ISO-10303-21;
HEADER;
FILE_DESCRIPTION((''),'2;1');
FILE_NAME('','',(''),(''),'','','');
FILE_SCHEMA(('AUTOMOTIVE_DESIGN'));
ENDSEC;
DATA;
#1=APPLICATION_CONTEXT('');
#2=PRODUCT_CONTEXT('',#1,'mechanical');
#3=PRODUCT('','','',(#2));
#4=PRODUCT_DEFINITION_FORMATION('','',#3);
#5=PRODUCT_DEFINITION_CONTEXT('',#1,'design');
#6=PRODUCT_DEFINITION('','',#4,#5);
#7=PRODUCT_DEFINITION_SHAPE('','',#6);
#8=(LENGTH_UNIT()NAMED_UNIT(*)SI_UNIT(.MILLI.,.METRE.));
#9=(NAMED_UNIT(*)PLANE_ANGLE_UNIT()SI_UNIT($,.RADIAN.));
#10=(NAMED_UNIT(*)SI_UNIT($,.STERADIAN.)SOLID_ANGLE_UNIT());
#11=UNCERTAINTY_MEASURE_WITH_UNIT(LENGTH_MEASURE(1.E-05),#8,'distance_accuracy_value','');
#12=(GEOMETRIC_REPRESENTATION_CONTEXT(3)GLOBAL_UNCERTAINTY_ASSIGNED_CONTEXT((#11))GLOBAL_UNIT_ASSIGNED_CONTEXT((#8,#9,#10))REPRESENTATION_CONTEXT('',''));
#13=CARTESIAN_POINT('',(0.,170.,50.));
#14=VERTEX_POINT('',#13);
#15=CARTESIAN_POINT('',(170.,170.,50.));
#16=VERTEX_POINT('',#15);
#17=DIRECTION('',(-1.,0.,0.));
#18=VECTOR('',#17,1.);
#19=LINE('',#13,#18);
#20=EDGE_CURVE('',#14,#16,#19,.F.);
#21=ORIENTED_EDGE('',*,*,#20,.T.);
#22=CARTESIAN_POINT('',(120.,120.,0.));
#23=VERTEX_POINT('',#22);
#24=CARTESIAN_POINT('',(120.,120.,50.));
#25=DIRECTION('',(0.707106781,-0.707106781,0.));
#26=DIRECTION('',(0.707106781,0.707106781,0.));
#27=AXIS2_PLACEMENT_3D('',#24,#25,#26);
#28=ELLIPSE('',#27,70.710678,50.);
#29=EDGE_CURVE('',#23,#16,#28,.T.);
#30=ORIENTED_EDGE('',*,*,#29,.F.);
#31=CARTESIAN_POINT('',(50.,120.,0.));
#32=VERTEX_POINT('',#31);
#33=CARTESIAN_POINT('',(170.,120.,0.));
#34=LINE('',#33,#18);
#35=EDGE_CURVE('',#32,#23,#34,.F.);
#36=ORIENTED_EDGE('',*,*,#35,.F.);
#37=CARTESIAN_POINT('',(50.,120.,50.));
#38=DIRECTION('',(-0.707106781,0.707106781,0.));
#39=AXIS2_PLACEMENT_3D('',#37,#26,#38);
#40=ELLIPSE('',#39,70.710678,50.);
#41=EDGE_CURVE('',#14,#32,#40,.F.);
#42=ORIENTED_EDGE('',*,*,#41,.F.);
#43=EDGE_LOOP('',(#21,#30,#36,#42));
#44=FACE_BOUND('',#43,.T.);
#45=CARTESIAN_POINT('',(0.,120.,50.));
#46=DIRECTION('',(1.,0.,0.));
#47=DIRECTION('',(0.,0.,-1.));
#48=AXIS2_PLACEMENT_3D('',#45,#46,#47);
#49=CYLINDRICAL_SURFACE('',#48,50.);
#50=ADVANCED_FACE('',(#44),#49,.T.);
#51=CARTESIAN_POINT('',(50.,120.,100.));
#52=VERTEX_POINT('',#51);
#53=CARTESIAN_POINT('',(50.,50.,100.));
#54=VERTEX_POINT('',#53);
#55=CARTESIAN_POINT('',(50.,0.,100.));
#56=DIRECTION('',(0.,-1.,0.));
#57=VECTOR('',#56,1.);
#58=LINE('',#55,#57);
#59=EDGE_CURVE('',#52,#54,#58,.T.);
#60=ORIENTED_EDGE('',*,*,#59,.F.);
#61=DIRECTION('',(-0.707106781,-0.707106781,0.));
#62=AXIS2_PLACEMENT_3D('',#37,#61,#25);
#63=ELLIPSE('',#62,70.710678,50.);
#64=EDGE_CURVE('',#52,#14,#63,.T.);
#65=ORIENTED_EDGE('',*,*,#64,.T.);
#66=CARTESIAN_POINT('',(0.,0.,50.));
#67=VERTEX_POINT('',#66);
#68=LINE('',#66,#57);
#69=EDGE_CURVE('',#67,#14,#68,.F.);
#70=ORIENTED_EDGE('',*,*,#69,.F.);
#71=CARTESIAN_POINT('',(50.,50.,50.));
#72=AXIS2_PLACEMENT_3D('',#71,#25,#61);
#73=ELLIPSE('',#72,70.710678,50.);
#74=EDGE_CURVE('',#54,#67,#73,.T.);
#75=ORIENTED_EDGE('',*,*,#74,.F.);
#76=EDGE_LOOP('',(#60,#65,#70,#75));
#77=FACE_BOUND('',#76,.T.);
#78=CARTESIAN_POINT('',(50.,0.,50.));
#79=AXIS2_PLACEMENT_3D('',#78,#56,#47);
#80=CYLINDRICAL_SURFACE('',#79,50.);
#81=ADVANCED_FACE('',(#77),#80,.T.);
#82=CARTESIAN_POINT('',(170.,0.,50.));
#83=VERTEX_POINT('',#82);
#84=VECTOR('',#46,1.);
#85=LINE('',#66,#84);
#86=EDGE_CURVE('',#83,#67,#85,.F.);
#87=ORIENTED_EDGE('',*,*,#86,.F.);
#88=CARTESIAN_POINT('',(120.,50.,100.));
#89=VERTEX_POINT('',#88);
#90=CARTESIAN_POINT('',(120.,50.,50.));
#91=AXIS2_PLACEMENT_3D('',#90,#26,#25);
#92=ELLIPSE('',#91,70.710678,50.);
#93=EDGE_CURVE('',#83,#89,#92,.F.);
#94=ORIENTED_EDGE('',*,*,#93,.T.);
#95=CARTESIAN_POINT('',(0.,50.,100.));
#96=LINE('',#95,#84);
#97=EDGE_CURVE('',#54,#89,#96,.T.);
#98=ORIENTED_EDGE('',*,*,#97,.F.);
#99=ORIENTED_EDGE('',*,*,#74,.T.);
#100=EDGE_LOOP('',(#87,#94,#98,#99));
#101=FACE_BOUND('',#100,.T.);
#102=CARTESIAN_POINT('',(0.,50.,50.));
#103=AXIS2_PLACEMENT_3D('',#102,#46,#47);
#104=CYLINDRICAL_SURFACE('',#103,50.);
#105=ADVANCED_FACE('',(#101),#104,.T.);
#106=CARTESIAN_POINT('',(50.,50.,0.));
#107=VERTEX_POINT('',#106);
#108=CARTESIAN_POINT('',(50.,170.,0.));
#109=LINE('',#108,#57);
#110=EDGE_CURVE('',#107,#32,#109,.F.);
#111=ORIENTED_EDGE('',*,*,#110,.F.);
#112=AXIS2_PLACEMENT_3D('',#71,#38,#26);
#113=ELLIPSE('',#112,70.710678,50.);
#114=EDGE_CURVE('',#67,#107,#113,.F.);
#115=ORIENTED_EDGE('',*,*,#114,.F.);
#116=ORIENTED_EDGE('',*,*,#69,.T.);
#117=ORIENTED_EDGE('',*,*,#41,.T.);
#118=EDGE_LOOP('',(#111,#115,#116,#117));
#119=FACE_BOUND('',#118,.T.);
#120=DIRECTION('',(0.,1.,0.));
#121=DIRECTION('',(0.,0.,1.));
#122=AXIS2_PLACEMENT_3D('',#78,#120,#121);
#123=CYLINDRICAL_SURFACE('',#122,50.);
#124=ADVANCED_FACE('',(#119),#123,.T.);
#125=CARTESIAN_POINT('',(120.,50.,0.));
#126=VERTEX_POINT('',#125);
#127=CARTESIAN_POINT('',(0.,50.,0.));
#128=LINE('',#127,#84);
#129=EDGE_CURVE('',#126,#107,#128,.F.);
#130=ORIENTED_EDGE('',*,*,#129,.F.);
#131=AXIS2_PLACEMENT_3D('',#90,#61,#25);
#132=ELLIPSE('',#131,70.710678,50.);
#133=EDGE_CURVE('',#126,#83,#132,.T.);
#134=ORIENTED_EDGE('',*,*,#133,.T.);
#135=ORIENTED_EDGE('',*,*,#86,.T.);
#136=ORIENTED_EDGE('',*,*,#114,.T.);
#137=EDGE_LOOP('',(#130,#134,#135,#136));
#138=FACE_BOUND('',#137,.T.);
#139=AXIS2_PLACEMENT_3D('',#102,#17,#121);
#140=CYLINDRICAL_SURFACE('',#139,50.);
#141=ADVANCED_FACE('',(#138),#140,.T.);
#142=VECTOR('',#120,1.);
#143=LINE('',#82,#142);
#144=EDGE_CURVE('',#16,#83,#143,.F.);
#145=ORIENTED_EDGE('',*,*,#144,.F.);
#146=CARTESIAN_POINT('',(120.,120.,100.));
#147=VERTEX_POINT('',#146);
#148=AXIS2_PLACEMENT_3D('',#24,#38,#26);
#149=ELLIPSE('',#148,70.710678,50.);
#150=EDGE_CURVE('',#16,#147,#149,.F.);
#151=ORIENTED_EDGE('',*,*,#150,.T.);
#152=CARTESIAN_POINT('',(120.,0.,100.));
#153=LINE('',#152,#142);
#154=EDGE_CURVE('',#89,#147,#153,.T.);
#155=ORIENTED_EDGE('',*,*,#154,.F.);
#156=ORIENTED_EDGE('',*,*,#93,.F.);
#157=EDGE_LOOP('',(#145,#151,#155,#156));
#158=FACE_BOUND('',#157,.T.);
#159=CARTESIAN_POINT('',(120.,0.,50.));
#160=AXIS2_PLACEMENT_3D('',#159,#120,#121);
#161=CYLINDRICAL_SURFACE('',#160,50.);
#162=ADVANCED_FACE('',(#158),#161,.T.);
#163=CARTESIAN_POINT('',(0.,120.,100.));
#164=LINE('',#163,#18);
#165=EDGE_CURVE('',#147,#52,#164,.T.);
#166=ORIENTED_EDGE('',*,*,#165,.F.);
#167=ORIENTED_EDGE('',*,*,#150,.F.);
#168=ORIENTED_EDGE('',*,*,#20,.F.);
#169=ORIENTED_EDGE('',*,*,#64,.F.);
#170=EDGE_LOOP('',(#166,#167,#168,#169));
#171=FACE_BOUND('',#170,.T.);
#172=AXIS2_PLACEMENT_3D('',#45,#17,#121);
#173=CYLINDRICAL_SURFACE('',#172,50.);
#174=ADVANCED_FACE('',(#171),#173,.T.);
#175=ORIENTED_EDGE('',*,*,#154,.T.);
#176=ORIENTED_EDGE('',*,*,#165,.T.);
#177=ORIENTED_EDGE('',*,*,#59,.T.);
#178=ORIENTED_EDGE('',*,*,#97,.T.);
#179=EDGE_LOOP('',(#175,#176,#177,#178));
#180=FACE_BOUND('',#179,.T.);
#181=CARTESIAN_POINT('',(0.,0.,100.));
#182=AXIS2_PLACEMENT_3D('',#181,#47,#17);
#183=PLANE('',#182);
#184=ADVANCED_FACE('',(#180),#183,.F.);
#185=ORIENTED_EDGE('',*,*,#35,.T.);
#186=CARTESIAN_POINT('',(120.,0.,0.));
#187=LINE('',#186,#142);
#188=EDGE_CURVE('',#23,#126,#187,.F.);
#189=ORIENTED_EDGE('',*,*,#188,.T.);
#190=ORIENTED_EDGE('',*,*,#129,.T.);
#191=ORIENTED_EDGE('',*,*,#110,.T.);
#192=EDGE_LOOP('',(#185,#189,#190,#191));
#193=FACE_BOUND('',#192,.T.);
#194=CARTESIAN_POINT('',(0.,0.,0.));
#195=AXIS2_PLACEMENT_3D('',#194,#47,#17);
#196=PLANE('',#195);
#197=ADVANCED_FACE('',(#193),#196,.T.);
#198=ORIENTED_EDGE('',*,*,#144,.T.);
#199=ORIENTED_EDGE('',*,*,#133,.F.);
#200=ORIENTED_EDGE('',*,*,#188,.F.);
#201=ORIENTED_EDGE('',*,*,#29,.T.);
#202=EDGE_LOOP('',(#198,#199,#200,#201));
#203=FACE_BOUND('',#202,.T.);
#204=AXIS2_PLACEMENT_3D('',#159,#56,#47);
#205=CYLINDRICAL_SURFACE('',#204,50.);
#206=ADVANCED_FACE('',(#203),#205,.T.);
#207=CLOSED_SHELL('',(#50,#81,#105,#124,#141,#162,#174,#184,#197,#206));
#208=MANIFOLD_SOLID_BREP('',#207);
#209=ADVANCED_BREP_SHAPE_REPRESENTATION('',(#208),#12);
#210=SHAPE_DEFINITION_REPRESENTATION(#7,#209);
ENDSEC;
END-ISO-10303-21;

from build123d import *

# Parameters (mm, degrees)
SKETCH1_W           = 170
SKETCH1_H           = 170
BOSS_EXTRUDE1_DEPTH = 100
FILLET1_R           = 50


with BuildPart() as part:
    # Sketch1 → Boss-Extrude1 (new body)
    with BuildSketch(Plane.XY):
        with Locations((85, 85)):
            Rectangle(SKETCH1_W, SKETCH1_H)
    extrude(amount=BOSS_EXTRUDE1_DEPTH)

    # Fillet1
    fillet1_edges = [part.edges().sort_by_distance(p)[0] for p in [
        (85, 0, 0),
        (170, 85, 0),
        (85, 170, 0),
        (0, 85, 0),
        (85, 170, 100),
        (170, 85, 100),
        (85, 0, 100),
        (0, 85, 100),
    ]]
    fillet(fillet1_edges, radius=FILLET1_R - 0.0001)  # a hair under: the kernel refuses the full size


solid = part.part
